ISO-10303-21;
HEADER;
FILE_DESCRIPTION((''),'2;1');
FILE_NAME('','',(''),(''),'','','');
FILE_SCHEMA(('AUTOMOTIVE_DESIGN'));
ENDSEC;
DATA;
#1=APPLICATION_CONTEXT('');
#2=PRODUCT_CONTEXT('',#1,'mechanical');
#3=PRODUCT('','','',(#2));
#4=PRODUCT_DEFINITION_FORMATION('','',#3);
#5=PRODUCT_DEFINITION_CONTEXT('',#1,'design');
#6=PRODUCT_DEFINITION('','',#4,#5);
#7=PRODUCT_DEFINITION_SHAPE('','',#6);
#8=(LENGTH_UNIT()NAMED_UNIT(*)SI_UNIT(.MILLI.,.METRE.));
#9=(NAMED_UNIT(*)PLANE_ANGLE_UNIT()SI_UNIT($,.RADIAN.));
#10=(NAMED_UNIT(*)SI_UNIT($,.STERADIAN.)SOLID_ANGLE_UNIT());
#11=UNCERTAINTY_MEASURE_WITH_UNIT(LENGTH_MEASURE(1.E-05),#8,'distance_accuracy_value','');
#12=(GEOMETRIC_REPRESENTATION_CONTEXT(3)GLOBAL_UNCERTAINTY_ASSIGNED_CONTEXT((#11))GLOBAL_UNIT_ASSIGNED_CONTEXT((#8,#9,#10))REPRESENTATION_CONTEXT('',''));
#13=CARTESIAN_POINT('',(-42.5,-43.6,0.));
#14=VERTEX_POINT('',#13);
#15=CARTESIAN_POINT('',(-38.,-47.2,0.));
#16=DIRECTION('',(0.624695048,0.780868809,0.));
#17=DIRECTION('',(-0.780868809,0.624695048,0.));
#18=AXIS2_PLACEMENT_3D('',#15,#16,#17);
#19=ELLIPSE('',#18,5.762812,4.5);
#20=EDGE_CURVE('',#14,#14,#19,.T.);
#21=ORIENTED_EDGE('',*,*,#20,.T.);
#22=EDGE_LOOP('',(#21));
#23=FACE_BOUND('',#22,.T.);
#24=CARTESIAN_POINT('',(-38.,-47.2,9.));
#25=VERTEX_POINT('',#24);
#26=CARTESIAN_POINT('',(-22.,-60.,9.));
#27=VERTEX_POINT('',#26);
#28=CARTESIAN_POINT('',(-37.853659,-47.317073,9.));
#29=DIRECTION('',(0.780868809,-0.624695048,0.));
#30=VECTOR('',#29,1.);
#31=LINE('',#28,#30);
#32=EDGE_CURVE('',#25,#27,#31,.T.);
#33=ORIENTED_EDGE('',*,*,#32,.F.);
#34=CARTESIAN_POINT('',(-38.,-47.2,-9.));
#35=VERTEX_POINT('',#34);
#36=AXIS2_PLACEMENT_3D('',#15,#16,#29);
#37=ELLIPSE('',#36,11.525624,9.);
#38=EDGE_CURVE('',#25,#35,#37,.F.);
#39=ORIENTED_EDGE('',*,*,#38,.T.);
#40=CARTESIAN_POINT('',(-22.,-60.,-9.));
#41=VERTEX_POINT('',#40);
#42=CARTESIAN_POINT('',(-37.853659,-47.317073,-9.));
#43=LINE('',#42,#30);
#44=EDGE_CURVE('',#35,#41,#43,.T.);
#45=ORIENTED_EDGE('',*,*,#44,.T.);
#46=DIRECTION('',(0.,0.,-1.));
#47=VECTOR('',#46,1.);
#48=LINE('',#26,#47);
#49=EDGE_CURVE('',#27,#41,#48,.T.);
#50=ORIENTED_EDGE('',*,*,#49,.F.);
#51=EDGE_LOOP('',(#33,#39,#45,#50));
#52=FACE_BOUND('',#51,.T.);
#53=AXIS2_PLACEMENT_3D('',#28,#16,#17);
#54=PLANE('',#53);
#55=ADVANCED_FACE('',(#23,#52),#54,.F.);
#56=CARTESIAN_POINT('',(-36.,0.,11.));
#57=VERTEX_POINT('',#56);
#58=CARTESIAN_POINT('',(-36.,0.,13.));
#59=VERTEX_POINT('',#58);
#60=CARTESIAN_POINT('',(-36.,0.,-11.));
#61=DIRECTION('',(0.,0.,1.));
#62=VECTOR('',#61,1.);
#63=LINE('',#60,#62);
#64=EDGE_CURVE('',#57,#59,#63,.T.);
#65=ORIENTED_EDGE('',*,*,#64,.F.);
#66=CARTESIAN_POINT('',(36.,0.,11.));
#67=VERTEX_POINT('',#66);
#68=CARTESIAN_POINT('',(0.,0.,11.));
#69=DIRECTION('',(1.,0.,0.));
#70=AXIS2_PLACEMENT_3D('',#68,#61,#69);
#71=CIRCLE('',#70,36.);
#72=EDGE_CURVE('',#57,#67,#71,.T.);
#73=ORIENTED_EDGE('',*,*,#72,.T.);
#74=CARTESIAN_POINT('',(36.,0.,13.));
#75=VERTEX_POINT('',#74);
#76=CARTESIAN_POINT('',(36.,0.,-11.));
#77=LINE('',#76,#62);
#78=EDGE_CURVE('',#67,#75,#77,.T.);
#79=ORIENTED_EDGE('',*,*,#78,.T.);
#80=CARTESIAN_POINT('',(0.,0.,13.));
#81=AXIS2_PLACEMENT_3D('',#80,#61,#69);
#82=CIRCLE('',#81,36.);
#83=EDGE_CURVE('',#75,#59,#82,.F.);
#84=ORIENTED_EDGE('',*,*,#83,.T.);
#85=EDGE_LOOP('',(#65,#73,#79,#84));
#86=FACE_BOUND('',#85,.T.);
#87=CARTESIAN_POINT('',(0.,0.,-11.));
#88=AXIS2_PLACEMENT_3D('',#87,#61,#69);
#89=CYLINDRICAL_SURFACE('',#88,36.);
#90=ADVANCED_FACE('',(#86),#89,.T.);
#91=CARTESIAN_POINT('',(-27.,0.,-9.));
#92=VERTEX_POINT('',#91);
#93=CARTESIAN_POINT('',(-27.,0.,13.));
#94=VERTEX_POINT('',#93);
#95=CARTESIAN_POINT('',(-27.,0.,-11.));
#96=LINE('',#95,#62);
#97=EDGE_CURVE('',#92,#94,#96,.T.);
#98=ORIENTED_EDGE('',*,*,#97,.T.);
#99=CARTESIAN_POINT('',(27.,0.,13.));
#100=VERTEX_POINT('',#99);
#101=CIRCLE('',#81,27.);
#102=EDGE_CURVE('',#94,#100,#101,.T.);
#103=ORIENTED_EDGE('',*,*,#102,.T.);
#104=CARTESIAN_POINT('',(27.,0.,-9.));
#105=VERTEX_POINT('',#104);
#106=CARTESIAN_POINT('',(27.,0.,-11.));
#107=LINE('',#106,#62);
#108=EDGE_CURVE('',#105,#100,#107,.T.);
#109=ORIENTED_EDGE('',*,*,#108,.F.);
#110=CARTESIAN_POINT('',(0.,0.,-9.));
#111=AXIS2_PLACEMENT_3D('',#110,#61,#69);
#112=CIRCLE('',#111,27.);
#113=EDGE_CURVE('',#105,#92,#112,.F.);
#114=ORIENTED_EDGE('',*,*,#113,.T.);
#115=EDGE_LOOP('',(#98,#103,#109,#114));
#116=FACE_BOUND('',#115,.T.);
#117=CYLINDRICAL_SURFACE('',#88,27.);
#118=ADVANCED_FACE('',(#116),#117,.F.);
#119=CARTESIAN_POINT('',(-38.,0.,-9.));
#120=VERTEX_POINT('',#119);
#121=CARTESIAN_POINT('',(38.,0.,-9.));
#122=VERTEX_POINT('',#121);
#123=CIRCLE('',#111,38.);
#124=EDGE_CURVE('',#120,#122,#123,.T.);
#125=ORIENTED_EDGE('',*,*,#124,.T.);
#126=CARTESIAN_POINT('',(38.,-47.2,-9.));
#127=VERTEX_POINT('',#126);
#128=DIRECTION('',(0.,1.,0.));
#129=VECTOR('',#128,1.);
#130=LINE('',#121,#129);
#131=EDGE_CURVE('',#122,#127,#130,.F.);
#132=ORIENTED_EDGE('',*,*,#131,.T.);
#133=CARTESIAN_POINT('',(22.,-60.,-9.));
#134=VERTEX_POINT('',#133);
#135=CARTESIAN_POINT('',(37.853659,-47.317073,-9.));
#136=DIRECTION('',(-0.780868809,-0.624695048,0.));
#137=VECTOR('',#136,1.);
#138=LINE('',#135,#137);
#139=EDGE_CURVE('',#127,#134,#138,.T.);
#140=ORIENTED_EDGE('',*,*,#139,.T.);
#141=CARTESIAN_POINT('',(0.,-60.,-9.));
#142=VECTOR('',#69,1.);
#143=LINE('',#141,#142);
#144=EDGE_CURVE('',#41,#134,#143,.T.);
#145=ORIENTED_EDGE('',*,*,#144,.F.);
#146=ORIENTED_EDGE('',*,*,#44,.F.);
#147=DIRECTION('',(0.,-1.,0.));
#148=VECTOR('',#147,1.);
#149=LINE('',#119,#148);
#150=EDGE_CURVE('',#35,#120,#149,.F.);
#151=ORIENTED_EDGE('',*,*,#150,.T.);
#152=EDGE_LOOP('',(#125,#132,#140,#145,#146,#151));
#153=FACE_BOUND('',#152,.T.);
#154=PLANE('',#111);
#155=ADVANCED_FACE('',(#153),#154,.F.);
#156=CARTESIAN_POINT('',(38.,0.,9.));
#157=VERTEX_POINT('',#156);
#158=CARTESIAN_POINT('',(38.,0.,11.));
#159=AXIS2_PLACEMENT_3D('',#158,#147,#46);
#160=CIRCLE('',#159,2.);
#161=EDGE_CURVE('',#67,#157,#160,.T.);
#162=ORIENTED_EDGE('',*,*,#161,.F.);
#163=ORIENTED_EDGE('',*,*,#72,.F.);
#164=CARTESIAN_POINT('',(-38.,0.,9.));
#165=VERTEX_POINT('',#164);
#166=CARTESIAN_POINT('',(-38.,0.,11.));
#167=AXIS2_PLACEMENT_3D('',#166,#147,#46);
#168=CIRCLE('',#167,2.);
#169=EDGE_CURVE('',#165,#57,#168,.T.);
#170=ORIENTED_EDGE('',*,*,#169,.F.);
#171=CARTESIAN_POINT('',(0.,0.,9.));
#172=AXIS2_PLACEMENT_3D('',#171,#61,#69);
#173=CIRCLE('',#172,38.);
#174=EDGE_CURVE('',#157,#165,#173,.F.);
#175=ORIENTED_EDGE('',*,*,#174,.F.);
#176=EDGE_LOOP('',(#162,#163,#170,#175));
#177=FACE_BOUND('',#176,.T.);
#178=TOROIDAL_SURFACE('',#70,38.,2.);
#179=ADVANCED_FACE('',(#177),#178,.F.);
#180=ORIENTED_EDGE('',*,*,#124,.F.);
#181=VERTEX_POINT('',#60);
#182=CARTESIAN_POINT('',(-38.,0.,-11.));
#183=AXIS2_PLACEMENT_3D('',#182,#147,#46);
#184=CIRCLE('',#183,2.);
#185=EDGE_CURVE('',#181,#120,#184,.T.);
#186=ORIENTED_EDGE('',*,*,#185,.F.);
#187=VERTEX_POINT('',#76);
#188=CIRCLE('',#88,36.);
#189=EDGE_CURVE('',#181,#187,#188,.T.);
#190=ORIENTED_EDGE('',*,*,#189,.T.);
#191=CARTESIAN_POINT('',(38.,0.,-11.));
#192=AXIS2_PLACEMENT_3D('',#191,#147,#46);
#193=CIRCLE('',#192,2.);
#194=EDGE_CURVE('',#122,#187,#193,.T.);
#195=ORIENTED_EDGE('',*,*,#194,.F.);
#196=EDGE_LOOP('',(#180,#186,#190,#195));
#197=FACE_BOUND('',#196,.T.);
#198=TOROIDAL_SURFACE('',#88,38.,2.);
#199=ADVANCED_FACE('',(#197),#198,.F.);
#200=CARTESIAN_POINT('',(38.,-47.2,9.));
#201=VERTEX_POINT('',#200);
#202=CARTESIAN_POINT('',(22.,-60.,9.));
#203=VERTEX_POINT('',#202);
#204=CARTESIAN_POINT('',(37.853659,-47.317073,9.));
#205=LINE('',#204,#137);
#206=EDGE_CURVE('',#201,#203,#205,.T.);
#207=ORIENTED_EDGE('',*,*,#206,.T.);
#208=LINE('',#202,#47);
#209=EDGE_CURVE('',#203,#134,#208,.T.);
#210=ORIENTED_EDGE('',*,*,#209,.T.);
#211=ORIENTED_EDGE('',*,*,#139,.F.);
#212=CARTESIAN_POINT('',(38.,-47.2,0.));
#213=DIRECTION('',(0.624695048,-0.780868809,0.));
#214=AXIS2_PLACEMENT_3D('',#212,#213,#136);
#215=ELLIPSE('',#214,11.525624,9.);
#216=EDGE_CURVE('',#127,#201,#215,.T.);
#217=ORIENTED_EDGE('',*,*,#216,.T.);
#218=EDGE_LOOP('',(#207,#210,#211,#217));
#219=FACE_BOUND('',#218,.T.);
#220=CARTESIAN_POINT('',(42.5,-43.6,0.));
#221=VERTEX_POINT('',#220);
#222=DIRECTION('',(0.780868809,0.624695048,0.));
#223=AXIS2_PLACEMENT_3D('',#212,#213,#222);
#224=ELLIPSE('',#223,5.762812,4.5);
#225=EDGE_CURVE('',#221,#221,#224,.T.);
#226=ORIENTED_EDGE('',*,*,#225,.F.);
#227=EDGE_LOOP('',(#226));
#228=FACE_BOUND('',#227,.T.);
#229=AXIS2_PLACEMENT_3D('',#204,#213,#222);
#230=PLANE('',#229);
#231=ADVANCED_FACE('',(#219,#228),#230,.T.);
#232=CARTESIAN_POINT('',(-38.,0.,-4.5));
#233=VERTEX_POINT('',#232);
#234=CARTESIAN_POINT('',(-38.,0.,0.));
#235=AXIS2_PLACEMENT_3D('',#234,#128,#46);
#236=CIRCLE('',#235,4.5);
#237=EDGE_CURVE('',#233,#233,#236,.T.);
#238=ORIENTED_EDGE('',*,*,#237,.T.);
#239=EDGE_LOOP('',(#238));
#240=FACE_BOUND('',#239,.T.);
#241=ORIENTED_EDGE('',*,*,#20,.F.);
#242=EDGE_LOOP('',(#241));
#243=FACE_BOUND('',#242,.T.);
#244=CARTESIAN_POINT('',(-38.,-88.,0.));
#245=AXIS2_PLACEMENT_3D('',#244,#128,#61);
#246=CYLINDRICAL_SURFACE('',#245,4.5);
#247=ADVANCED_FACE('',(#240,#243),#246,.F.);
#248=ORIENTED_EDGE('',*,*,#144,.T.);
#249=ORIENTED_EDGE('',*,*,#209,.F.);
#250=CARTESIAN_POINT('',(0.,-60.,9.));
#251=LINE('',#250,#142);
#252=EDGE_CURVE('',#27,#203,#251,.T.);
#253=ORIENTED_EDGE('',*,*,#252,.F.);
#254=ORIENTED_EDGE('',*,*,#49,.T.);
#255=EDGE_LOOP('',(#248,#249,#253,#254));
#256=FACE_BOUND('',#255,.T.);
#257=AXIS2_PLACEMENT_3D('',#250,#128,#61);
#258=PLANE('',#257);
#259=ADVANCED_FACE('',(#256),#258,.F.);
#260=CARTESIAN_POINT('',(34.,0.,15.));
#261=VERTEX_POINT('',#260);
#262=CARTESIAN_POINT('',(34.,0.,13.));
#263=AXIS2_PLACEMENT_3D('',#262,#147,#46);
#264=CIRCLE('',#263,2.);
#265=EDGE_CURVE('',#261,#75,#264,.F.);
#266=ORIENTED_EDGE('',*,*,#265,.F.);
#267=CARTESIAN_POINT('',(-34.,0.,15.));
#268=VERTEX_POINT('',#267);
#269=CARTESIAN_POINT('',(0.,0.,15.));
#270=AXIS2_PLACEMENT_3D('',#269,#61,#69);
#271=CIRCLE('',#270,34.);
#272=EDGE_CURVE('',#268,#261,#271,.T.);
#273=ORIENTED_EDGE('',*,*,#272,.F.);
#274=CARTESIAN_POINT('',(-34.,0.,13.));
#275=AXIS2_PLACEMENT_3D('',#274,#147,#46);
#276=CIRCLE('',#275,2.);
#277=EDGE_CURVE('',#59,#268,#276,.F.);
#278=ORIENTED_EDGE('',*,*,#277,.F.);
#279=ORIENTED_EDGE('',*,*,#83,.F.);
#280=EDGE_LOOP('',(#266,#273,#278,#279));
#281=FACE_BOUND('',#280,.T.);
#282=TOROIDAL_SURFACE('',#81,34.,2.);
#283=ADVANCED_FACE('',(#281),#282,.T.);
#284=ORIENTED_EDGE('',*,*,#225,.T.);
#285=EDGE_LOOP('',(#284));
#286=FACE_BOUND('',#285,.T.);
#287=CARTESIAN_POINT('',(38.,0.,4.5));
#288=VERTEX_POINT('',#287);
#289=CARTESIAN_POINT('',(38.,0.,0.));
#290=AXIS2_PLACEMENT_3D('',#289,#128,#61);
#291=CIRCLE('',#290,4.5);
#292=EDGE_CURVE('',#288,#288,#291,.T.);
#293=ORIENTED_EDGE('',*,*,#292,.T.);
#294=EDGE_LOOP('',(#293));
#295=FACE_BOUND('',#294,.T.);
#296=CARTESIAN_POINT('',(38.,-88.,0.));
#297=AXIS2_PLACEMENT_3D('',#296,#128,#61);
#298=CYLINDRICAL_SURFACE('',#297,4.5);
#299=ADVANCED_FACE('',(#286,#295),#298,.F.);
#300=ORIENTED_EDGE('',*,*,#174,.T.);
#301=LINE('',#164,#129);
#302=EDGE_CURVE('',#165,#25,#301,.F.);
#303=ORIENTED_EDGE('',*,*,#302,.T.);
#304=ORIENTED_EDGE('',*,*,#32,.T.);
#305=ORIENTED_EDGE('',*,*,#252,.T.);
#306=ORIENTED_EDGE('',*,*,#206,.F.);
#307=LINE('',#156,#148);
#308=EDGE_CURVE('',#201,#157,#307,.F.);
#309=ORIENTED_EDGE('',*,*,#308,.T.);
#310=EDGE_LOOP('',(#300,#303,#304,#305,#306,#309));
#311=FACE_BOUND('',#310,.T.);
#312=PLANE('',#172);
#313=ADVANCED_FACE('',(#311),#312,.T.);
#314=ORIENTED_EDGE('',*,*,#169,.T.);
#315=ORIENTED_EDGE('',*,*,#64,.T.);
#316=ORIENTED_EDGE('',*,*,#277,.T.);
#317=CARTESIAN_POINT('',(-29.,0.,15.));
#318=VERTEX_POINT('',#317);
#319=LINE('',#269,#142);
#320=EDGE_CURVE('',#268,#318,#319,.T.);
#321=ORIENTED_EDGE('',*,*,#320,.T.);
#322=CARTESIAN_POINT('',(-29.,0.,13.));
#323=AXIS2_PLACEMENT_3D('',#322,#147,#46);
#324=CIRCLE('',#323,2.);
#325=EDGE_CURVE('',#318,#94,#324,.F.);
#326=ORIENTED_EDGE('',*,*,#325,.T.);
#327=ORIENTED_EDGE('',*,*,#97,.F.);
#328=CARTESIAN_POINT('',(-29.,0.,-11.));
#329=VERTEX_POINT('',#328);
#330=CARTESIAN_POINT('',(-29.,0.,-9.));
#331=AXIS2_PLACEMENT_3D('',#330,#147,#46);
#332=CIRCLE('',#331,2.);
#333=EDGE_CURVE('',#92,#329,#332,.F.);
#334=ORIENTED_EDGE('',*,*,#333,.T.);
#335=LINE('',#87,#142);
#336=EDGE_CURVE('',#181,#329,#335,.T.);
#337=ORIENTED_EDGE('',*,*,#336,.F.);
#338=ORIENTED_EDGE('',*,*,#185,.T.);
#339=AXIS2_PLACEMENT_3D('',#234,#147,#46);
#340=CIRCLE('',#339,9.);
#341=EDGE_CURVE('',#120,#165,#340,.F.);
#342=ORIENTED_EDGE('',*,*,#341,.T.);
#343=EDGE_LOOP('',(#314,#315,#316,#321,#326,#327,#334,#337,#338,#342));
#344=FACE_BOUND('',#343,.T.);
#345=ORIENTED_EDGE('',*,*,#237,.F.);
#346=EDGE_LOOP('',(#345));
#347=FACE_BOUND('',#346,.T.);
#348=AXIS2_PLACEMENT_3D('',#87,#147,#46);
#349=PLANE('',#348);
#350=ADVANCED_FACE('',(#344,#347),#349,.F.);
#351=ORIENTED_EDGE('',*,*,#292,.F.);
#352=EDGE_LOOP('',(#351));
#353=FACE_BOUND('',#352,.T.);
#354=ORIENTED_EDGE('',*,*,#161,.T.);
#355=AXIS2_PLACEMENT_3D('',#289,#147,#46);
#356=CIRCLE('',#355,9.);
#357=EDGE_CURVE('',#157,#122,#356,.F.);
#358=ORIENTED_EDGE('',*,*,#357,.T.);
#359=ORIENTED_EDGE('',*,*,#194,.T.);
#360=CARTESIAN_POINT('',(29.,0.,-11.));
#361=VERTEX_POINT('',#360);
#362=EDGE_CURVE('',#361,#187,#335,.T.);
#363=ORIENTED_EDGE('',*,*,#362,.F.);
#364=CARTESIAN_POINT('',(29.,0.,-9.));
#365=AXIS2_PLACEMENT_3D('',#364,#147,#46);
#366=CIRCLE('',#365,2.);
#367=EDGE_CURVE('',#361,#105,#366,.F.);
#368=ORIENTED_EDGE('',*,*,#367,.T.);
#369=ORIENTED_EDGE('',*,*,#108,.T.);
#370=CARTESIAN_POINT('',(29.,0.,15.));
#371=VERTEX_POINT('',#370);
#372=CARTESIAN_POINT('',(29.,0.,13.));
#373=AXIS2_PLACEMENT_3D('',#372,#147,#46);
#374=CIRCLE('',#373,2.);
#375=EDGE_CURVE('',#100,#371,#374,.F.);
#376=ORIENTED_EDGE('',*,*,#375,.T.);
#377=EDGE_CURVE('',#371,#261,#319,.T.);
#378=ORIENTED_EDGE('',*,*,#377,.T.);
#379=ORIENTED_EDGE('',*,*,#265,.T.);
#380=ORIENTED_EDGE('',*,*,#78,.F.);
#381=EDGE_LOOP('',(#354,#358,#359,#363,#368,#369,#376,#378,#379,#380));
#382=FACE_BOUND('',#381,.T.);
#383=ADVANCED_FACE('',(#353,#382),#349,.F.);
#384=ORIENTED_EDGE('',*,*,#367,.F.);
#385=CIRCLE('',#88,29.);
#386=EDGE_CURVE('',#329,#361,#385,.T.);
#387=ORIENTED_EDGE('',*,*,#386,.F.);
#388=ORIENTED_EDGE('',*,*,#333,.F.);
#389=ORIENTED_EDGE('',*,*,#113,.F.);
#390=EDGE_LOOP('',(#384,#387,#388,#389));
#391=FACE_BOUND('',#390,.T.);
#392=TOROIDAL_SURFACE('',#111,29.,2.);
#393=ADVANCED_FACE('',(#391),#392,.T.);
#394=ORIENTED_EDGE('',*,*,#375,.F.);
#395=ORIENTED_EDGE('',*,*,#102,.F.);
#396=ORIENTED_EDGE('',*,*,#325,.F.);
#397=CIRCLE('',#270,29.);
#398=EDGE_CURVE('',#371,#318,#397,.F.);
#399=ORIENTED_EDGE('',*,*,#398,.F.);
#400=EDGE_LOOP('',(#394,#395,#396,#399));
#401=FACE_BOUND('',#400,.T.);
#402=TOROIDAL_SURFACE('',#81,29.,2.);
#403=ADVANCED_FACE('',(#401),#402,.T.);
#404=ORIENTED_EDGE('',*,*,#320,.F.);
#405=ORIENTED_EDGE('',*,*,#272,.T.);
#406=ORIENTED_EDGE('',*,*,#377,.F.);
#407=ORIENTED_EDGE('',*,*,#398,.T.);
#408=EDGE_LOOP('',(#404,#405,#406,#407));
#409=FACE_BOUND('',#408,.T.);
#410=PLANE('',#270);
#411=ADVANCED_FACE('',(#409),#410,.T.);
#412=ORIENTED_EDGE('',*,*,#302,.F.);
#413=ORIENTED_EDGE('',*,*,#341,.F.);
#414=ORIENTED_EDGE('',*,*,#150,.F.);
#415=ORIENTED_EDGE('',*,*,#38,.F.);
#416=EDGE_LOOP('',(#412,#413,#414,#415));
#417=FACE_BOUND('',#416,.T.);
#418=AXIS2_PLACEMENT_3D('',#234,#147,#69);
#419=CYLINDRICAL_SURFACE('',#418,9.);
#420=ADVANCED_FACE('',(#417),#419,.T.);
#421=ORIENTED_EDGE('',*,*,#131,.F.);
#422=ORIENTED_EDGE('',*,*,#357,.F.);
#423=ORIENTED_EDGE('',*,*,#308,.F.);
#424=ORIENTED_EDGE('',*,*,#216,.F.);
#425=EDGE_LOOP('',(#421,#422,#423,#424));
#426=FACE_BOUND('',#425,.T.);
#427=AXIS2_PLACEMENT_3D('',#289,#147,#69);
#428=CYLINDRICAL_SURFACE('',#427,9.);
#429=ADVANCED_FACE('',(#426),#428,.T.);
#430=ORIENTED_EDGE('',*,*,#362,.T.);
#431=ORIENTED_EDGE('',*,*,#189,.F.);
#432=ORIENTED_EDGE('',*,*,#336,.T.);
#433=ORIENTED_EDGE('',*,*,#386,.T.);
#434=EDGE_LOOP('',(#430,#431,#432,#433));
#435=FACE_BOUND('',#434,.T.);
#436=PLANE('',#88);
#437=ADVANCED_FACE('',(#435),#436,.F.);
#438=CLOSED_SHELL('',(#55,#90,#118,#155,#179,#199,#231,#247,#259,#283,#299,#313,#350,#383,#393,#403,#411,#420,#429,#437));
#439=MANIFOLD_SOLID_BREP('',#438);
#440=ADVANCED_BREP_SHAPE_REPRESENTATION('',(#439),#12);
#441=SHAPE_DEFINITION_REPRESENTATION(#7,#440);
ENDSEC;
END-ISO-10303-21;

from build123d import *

# Parameters (mm, degrees)
BOSS_EXTRUDE1_DEPTH      = 15
BOSS_EXTRUDE1_DEPTH_BACK = 11
BOSS_EXTRUDE2_DEPTH      = 9
FILLET1_START            = -60
FILLET1_DEPTH            = 60
FILLET2_START            = -60
FILLET2_DEPTH            = 60
SKETCH2_R                = 4.5
CUT_EXTRUDE1_DEPTH       = 88
FILLET3_R                = 2
FILLET4_R                = 2


with BuildPart() as part:
    # Sketch1 → Boss-Extrude1 (new, two sides: drawn at the far end of the back side and taken through both)
    with BuildSketch(Plane.XY.offset(-BOSS_EXTRUDE1_DEPTH_BACK)):
        with BuildLine():
            Line((-27, 0), (-36, 0))
            ThreePointArc((-36, 0), (0, -36), (36, 0))
            Line((36, 0), (27, 0))
            ThreePointArc((27, 0), (0, -27), (-27, 0))
        make_face()
    extrude(amount=BOSS_EXTRUDE1_DEPTH + BOSS_EXTRUDE1_DEPTH_BACK)

    # Sketch1<3> → Boss-Extrude2 (add, symmetric)
    with BuildSketch(Plane.XY):
        with BuildLine():
            ThreePointArc((-36, 0), (0, -36), (36, 0))
            Line((36, 0), (47, 0))
            Line((47, 0), (47, -40))
            Line((47, -40), (22, -60))
            Line((22, -60), (-22, -60))
            Line((-22, -60), (-47, -40))
            Line((-47, -40), (-47, 0))
            Line((-47, 0), (-36, 0))
        make_face()
    extrude(amount=BOSS_EXTRUDE2_DEPTH, both=True)

    # Fillet1: read off the stored shape, not the designer's step
    # Fillet1 outline → Fillet1 (cut)
    with BuildSketch(Plane(origin=(0, 0, 0), x_dir=(1, 0, 0), z_dir=(0, 1, 0)).offset(FILLET1_START)):
        with BuildLine():
            Line((47, 9), (38, 9))
            ThreePointArc((38, 9), (44.363961031, 6.363961031), (47, 0))
            Line((47, 0), (47, 9))
        make_face()
        with BuildLine():
            Line((47, -9), (47, 0))
            ThreePointArc((47, 0), (44.363961031, -6.363961031), (38, -9))
            Line((38, -9), (47, -9))
        make_face()
    extrude(amount=FILLET1_DEPTH, mode=Mode.SUBTRACT)

    # Fillet2: read off the stored shape, not the designer's step
    # Fillet2 outline → Fillet2 (cut)
    with BuildSketch(Plane(origin=(0, 0, 0), x_dir=(1, 0, 0), z_dir=(0, 1, 0)).offset(FILLET2_START)):
        with BuildLine():
            Line((-47, -9), (-38, -9))
            ThreePointArc((-38, -9), (-44.363961031, -6.363961031), (-47, 0))
            Line((-47, 0), (-47, -9))
        make_face()
        with BuildLine():
            Line((-47, 9), (-47, 0))
            ThreePointArc((-47, 0), (-44.363961031, 6.363961031), (-38, 9))
            Line((-38, 9), (-47, 9))
        make_face()
    extrude(amount=FILLET2_DEPTH, mode=Mode.SUBTRACT)

    # Sketch2 → Cut-Extrude1 (cut)
    with BuildSketch(Plane(origin=(0, 0, 0), x_dir=(1, 0, 0), z_dir=(0, 1, 0))):
        with Locations(Location((38, 0, 0), (0, 0, 270))):
            Circle(SKETCH2_R)
        with Locations(Location((-38, 0, 0), (0, 0, 180))):
            Circle(SKETCH2_R)
    extrude(amount=-CUT_EXTRUDE1_DEPTH, mode=Mode.SUBTRACT)

    # Fillet3
    fillet3_edges = [part.edges().sort_by_distance(p)[0] for p in [
        (0, -36, 15),
        (0, -36, -9),
        (0, -36, 9),
    ]]
    fillet(fillet3_edges, radius=FILLET3_R - 0.0001)  # a hair under: the kernel refuses the full size

    # Fillet4
    fillet4_edges = [part.edges().sort_by_distance(p)[0] for p in [
        (0, -27, 15),
        (0, -27, -11),
    ]]
    fillet(fillet4_edges, radius=FILLET4_R)


solid = part.part
